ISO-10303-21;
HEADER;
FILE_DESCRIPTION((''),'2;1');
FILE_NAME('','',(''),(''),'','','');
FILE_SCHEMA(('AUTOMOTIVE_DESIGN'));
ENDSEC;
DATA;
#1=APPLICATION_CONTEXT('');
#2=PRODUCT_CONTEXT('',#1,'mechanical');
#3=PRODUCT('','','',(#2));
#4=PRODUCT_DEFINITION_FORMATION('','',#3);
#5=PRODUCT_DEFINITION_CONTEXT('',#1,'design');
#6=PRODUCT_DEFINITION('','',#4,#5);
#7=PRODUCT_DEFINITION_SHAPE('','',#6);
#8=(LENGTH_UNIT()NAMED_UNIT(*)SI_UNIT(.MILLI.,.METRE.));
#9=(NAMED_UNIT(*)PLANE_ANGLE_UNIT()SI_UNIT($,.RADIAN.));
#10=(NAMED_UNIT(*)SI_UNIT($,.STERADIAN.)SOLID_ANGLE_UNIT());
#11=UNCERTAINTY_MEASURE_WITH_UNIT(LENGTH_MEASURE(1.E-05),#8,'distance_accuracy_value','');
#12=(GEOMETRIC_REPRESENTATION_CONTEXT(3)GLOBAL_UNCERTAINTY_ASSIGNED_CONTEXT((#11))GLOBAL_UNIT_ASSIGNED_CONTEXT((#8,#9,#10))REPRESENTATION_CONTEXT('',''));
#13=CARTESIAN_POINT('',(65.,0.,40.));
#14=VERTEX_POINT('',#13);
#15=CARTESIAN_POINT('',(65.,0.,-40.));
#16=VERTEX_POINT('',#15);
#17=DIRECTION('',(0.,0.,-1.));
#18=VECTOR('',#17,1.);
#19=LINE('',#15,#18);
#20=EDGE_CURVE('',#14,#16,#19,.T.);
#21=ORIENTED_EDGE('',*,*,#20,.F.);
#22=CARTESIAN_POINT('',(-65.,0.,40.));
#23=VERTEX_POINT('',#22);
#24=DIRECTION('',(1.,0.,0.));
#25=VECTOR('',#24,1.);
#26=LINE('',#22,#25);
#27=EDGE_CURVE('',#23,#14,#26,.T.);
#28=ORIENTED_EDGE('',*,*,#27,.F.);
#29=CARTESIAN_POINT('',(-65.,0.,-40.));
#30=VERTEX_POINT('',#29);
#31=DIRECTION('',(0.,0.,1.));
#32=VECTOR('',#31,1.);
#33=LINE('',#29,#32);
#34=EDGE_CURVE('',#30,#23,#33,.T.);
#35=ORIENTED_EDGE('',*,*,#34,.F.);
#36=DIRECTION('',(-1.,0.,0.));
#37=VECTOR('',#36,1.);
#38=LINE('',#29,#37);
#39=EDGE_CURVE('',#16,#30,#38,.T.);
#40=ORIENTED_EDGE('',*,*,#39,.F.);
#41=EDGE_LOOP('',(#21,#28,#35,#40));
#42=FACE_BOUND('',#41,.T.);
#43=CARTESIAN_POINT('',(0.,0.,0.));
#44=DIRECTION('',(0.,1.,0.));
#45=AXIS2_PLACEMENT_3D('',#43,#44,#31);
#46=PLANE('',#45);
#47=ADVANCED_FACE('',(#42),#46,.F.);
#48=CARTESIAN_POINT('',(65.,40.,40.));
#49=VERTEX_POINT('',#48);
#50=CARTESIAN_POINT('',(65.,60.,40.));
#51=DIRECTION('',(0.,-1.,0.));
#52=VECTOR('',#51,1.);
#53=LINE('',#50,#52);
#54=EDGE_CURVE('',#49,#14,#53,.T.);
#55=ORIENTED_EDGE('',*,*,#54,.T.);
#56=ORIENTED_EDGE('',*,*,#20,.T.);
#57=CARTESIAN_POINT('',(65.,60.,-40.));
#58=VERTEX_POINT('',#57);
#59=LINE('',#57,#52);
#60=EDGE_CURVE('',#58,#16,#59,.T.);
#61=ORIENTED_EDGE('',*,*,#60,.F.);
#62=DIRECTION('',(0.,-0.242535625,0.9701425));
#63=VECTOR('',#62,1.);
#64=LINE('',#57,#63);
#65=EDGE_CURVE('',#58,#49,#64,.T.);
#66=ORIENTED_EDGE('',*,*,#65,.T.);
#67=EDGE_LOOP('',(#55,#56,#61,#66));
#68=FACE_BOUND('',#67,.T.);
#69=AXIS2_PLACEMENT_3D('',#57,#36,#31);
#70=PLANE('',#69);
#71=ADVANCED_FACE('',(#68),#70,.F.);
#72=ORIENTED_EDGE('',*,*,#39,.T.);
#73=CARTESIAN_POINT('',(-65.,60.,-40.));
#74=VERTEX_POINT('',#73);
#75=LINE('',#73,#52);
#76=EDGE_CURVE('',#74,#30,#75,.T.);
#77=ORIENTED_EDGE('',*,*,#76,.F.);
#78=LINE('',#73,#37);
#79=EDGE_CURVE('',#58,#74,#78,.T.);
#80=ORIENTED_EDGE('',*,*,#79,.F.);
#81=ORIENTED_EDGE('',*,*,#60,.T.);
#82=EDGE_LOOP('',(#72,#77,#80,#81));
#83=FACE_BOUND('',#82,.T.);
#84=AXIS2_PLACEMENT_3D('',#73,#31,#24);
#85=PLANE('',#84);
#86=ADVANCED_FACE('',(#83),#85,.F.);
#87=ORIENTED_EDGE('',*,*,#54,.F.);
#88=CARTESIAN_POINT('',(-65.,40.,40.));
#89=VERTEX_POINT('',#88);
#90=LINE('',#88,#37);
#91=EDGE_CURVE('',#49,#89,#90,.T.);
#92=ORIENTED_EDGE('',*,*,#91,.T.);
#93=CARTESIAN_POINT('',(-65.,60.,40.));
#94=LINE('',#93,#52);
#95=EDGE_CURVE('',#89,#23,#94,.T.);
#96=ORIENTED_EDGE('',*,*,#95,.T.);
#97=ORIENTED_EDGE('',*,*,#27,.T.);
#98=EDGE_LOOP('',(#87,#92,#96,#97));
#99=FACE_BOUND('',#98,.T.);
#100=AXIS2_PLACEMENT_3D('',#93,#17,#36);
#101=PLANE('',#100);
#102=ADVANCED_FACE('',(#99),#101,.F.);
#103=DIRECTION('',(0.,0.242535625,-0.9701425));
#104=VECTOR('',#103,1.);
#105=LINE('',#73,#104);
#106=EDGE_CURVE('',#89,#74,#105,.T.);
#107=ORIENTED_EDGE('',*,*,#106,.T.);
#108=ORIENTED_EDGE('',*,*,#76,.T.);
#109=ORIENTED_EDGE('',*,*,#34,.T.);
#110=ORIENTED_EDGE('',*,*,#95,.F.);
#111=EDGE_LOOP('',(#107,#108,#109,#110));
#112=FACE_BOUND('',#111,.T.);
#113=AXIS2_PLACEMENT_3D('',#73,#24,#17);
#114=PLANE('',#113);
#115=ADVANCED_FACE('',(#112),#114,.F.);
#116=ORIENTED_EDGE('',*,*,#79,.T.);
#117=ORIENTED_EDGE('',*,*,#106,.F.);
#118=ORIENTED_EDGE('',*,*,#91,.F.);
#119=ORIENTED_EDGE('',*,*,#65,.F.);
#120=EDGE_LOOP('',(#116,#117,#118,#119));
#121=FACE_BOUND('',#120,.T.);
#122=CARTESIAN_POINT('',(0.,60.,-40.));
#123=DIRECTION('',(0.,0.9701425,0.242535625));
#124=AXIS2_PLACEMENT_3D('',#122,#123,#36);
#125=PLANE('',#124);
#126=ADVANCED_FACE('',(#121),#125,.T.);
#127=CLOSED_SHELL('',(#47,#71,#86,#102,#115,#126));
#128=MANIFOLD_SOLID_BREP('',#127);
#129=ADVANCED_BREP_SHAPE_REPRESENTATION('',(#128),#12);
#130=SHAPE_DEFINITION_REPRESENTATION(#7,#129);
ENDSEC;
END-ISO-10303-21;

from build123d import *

# Parameters (mm, degrees)
SKETCH1_W           = 130
SKETCH1_H           = 80
BOSS_EXTRUDE1_DEPTH = 60
CHAMFER1_SIZE2      = 80
CHAMFER1_SIZE       = 20


with BuildPart() as part:
    # Sketch1 → Boss-Extrude1 (new body)
    with BuildSketch(Plane(origin=(0, 0, 0), x_dir=(1, 0, 0), z_dir=(0, 1, 0))):
        Rectangle(SKETCH1_W, SKETCH1_H)
    extrude(amount=BOSS_EXTRUDE1_DEPTH)

    # Chamfer1
    chamfer1_edges = [part.edges().sort_by_distance(p)[0] for p in [
        (0, 60, 40),
    ]]
    chamfer1_side = [part.faces().sort_by_distance(p)[0] for p in [
        (0, 59.6, 40),
    ]]
    chamfer(chamfer1_edges, length=CHAMFER1_SIZE - 0.0001, length2=CHAMFER1_SIZE2 - 0.0001, reference=chamfer1_side[0])  # a hair under: the kernel refuses the full size


solid = part.part
